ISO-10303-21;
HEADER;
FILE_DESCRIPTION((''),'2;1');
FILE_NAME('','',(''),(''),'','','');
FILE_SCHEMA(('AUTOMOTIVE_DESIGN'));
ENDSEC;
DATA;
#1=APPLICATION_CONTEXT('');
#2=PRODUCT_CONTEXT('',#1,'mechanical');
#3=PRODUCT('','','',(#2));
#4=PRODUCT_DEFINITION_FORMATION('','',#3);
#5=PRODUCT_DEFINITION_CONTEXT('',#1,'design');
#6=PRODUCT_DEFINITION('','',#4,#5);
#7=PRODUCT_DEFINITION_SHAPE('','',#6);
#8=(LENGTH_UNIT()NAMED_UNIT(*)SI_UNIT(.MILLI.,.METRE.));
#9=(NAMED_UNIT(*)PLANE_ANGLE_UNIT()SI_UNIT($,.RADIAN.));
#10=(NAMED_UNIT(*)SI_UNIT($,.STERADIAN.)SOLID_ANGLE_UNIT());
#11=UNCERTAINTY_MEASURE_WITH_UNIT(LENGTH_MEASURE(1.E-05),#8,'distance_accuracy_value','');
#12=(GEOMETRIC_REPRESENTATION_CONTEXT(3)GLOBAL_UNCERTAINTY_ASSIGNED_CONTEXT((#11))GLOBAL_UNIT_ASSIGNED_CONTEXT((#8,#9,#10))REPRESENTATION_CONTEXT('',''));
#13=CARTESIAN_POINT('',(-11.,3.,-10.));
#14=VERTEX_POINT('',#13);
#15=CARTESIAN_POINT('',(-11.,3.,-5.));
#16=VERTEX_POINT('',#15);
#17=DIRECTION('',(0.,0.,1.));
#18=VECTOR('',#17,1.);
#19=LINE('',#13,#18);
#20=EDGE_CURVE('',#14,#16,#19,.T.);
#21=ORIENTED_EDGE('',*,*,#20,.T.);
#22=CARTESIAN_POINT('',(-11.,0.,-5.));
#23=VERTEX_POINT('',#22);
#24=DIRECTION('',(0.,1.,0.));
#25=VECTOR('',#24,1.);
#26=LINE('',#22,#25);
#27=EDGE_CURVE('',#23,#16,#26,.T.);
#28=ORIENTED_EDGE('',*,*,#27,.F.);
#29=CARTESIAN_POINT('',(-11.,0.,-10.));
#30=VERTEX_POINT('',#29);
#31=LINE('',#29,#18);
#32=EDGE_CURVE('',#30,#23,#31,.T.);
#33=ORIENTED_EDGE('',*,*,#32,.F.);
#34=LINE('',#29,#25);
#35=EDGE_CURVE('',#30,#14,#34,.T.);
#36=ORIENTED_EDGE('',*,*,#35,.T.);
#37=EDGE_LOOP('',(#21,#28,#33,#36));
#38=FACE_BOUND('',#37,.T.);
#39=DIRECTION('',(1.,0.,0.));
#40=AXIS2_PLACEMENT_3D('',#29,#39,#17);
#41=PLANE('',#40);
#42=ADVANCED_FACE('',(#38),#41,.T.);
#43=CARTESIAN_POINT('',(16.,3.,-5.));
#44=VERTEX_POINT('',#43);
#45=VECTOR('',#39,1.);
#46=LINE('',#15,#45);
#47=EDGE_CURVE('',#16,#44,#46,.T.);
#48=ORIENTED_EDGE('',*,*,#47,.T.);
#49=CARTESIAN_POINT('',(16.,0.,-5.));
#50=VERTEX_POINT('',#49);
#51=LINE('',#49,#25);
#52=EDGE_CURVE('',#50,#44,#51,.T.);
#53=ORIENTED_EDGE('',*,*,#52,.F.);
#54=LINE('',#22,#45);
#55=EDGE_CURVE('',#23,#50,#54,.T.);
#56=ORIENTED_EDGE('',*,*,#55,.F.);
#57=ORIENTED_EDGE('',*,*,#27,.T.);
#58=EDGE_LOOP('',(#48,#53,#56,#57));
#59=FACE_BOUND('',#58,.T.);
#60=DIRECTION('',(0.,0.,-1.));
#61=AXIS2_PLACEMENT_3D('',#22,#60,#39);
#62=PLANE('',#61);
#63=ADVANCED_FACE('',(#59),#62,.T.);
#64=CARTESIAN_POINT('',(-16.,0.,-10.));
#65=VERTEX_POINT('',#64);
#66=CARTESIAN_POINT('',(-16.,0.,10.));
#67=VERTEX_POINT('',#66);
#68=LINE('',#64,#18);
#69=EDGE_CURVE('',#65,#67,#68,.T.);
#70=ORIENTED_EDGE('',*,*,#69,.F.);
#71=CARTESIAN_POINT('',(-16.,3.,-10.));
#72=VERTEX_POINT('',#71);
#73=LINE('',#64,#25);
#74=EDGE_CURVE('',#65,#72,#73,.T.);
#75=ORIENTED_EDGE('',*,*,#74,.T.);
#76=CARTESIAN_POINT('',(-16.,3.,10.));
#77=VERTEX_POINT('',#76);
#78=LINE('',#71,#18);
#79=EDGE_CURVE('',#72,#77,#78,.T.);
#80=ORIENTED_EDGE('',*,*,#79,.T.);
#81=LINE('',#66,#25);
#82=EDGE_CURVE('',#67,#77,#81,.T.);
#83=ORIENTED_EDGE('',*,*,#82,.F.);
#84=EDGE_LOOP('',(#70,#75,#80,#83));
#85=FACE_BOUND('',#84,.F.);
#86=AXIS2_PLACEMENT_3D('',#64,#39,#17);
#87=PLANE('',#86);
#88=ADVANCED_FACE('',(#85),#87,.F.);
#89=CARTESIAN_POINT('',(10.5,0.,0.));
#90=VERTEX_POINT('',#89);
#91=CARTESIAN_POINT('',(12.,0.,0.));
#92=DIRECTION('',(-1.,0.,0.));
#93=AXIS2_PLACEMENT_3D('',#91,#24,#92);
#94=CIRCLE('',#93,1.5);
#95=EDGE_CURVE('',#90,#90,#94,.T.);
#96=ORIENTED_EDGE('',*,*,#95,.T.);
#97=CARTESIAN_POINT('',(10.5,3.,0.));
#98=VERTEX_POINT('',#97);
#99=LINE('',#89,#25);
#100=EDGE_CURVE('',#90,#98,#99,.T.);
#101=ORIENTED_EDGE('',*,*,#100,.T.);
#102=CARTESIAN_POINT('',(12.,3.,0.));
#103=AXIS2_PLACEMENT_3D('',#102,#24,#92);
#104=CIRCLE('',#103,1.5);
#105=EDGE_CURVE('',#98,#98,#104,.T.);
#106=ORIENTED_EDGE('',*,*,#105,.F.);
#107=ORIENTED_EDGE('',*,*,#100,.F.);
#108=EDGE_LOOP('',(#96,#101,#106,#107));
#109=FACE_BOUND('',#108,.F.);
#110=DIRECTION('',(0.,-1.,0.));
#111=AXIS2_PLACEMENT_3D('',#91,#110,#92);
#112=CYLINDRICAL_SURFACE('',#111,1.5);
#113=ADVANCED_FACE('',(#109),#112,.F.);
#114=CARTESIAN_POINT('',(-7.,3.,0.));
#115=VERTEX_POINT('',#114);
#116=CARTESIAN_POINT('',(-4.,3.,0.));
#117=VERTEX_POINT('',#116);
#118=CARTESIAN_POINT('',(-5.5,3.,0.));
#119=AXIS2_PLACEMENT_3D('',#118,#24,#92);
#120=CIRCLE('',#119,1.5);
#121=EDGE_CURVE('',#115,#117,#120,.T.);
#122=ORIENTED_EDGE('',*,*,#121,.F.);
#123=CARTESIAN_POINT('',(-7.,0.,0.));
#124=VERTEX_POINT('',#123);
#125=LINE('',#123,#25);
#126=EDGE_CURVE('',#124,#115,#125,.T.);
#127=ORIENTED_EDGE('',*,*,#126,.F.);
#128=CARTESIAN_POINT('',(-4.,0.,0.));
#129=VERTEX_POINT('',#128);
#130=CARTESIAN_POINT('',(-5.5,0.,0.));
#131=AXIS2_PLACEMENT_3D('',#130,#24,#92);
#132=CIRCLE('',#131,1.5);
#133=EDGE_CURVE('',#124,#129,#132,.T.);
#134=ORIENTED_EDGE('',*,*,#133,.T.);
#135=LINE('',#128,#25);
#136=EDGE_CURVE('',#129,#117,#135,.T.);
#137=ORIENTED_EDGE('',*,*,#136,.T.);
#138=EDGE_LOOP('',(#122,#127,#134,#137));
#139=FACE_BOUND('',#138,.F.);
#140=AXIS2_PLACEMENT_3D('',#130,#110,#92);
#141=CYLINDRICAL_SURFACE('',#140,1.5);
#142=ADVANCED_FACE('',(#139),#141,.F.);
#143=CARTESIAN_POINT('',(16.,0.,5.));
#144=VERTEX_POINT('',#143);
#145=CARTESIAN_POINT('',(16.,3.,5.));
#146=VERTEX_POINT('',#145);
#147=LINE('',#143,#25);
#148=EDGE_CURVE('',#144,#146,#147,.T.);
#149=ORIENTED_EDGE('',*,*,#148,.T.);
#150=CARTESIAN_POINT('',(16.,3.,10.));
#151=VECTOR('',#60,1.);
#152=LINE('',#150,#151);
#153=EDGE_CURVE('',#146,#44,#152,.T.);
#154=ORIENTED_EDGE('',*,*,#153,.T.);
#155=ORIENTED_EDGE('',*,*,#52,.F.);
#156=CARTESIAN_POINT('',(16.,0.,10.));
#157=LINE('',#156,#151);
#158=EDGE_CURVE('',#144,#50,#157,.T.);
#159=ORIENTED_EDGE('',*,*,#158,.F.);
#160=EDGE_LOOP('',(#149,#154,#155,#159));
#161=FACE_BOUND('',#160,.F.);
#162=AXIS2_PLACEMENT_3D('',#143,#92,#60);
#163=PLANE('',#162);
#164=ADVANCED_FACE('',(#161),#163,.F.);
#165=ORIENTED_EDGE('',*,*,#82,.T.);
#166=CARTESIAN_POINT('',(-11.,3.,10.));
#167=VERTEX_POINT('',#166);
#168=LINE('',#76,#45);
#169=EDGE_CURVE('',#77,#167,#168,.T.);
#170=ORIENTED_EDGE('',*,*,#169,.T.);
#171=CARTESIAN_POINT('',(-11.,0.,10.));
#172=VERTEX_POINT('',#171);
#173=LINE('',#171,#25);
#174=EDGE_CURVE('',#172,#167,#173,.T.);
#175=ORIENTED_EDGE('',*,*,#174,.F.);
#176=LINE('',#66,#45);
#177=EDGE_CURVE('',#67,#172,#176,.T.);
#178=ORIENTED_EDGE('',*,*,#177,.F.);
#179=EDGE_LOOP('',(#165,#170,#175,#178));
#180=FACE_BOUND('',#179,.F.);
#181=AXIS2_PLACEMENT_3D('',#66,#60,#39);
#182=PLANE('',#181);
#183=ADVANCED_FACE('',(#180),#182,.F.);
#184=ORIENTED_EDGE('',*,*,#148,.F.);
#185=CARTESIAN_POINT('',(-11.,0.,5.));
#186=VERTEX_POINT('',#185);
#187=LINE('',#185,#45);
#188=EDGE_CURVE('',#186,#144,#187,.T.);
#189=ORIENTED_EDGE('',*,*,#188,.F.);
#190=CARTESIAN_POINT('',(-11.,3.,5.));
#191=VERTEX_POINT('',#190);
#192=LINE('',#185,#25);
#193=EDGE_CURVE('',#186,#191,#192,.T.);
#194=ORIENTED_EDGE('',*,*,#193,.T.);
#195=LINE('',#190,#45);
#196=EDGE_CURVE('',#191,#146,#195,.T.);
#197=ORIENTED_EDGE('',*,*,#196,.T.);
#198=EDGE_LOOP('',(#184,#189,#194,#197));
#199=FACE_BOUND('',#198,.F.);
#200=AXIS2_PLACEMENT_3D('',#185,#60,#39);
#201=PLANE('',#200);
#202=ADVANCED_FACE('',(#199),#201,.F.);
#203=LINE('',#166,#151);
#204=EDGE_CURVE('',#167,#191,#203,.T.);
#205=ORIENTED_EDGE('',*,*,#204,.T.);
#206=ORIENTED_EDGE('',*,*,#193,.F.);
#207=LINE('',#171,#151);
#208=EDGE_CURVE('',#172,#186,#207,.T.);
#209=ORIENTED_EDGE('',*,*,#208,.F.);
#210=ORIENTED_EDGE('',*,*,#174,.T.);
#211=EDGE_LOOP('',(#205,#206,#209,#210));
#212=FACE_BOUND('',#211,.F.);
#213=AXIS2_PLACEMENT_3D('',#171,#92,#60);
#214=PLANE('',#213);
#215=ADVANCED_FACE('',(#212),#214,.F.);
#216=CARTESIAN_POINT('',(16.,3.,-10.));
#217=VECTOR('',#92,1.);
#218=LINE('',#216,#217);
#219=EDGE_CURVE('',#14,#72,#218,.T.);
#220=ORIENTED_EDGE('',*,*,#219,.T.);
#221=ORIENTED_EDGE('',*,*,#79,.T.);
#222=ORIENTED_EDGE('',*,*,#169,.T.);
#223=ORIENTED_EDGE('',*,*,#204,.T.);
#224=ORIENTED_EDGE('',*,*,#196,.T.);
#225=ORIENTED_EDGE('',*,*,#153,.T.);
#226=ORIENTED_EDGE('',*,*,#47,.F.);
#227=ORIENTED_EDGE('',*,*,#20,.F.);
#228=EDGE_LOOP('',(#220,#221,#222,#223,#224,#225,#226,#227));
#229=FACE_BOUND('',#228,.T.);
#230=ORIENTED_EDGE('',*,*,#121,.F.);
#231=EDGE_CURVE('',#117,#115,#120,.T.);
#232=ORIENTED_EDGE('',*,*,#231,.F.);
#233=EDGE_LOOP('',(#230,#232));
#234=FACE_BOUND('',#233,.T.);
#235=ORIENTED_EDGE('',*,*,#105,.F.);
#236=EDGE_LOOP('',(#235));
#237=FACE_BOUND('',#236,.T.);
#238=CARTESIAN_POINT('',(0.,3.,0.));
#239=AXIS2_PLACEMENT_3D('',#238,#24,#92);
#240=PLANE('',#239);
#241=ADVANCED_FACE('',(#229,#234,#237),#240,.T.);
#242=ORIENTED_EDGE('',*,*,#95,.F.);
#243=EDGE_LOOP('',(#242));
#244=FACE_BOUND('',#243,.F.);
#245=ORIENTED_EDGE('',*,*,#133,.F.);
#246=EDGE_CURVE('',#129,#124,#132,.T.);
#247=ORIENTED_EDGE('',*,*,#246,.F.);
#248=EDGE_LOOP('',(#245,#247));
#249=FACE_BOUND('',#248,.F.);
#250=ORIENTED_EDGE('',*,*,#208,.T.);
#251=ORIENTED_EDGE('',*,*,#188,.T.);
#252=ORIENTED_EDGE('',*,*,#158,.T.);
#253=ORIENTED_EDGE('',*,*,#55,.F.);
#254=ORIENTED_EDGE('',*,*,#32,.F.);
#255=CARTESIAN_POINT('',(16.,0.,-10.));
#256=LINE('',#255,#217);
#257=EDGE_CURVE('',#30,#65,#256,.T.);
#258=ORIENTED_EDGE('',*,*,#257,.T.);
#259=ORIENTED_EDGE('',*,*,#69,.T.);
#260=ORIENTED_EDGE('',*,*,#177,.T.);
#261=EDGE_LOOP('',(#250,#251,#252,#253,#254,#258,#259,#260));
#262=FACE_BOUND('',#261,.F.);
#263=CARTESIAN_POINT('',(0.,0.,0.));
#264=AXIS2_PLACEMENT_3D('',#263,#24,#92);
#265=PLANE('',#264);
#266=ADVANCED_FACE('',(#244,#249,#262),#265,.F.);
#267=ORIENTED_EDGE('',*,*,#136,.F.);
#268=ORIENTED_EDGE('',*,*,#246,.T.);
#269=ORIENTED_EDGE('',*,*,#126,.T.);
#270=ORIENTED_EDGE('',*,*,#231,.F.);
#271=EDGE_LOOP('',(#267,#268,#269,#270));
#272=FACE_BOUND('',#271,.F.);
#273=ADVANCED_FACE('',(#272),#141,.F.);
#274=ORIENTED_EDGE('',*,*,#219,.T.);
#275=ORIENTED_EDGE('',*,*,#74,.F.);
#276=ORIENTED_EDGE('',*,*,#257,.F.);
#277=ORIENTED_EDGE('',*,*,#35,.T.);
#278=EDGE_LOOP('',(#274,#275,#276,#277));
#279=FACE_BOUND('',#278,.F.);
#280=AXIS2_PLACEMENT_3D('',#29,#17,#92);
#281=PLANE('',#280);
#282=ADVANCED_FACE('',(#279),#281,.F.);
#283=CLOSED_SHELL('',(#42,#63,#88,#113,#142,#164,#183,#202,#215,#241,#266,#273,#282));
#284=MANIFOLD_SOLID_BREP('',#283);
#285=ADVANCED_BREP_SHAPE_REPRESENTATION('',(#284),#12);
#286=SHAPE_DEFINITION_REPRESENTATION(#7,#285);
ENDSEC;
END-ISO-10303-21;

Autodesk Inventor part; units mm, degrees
ref_plane "YZ Plane" through (0, 0, 0) normal (1, 0, 0) x (0, 1, 0)
ref_plane "XZ Plane" through (0, 0, 0) normal (0, 1, 0) x (-1, 0, 0)
ref_plane "XY Plane" through (0, 0, 0) normal (0, 0, 1) x (1, 0, 0)
sketch "Sketch1" plane through (0, 0, 0) normal (0, 1, 0) x (-1, 0, 0)
  line L0 (16, 10) -> (-16, 10)
  line L1 (-16, 10) -> (-16, -10)
  line L2 (-16, -10) -> (16, -10)
  line L3 (16, -10) -> (16, 10)
  line L4 (16, 10) -> (-16, -10) construction
  line L5 (-16, 10) -> (16, -10) construction
  line L6 (-16, -10) -> (11, -10)
  line L7 (11, -10) -> (11, -5)
  line L8 (11, -5) -> (-16, -5)
  line L9 (-16, -5) -> (-16, -10)
  line L10 (-16, 10) -> (11, 10)
  line L11 (11, 10) -> (11, 5)
  line L12 (11, 5) -> (-16, 5)
  line L13 (-16, 5) -> (-16, 10)
  line L14 (11, 0) -> (8, 0)
  line L15 (8, 0) -> (5.5, 0)
  line L16 (5.5, 0) -> (-12, 0)
  circle A0 centre (5.5, 0) radius 1.5
  circle A1 centre (-12, 0) radius 1.5
  point P0 (0, 0)
  dimension "d0" = 32
  dimension "d1" = 20
  dimension "d2" = 27
  dimension "d3" = 5
  dimension "d4" = 27
  dimension "d5" = 5
  dimension "d6" = 3
  dimension "d7" = 2.5
  dimension "d8" = 17.5
  dimension "d9" = 3
  dimension "d10" = 3
  dimension "d13" = 10
extrude "Extrusion1" add sketch "Sketch1" along normal blind 3 contours L3 L2 L7 L8 L1 L12 L11 L0
sketch "Sketch2" plane through (0, 3, 0) normal (0, 1, 0) x (1, 0, 0)
  point P0 (0, 0)
properties part number "Stand T Sd Serayu 2024"
